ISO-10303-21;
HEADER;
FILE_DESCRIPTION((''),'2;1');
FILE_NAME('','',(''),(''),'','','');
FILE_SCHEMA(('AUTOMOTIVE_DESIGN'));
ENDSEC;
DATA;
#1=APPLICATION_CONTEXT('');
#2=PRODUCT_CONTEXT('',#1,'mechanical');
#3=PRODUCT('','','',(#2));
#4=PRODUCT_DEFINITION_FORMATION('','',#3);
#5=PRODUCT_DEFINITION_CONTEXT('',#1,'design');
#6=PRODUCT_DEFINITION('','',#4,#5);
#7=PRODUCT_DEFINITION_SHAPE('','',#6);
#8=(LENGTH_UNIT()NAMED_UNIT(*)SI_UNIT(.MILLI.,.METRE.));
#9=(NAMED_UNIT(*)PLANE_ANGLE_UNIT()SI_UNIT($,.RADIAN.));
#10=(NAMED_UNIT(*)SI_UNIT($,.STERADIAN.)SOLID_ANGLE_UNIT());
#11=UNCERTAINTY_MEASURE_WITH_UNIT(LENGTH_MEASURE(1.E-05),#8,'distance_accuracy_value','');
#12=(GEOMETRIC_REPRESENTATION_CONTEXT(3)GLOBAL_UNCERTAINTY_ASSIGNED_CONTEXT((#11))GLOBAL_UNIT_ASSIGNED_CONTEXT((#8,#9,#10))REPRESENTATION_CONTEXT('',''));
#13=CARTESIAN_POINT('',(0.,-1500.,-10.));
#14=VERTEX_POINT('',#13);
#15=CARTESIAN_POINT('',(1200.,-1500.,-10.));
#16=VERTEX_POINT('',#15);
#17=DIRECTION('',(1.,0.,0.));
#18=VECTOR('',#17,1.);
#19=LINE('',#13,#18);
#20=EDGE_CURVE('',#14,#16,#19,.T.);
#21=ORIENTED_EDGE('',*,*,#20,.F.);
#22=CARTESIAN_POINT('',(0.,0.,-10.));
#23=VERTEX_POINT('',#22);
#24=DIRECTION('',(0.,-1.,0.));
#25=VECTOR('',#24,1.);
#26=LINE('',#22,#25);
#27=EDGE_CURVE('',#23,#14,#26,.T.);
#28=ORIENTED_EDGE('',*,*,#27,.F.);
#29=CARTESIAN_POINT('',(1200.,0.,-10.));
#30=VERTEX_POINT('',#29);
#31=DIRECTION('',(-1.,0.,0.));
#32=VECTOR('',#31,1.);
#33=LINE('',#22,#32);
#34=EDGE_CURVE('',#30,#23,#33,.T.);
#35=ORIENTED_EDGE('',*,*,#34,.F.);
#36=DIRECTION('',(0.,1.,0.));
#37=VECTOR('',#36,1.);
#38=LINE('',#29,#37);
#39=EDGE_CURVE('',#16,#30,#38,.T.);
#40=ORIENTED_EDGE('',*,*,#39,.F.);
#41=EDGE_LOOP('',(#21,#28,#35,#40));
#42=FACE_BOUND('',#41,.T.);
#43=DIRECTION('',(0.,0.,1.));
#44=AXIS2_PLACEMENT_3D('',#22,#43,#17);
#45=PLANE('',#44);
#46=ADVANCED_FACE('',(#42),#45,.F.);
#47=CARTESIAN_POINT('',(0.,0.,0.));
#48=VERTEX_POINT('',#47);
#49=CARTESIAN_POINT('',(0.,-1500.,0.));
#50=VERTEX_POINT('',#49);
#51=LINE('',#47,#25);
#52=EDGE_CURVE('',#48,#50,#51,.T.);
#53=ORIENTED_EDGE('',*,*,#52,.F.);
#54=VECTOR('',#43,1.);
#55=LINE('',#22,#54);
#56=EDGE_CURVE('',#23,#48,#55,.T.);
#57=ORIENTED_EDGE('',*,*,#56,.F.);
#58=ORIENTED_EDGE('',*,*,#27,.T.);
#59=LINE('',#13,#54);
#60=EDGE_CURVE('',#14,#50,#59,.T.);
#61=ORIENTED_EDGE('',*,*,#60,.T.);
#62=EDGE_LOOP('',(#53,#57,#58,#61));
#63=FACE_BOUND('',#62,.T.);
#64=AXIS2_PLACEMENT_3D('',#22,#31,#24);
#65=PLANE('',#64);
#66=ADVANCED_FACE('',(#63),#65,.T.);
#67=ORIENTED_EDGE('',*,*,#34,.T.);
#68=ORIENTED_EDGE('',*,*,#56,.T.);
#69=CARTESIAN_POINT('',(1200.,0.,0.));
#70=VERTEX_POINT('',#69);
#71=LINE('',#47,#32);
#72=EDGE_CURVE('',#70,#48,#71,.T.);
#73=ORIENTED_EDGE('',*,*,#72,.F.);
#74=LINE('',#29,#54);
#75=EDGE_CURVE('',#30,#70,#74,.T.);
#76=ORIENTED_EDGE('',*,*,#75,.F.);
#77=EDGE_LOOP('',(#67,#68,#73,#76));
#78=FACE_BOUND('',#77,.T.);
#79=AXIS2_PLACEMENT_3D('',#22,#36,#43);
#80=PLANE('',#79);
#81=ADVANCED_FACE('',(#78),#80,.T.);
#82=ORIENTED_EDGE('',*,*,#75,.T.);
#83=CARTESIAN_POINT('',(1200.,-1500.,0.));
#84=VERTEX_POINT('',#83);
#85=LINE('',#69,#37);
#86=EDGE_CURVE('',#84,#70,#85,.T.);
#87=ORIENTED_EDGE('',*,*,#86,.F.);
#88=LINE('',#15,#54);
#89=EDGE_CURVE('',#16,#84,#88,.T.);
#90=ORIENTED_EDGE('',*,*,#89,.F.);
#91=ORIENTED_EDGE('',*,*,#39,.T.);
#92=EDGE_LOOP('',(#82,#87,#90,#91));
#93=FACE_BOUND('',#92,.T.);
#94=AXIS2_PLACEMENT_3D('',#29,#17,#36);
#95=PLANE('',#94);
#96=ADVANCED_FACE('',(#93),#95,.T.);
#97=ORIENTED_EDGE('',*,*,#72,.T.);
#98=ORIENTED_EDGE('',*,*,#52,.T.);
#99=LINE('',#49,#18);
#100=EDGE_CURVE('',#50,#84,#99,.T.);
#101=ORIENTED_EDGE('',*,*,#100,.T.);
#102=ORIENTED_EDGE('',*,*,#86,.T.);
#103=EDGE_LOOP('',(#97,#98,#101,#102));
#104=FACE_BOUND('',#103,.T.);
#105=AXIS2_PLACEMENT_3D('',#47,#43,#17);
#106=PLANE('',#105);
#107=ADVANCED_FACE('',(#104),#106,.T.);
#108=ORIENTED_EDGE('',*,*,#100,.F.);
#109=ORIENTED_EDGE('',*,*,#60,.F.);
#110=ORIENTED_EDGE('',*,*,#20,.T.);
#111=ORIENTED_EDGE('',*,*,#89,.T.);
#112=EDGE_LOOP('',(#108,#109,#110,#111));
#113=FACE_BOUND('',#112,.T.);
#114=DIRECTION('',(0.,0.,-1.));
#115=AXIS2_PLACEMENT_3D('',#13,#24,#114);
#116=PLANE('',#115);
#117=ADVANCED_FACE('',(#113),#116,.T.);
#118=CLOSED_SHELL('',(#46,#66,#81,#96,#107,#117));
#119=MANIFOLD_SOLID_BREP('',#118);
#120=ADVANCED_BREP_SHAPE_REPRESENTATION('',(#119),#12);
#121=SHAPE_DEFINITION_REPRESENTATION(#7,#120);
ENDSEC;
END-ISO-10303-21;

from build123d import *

# Parameters (mm, degrees)
IZIM1_W            = 1200
IZIM1_H            = 1500
TABAN_FLAN_1_DEPTH = 10


# Sheet-metal steps are written as plain solids
with BuildPart() as part:
    # Çizim1 → Taban-Flanş1 (new body)
    with BuildSketch(Plane.XY):
        with Locations((600, -750)):
            Rectangle(IZIM1_W, IZIM1_H)
    extrude(amount=-TABAN_FLAN_1_DEPTH)


solid = part.part
